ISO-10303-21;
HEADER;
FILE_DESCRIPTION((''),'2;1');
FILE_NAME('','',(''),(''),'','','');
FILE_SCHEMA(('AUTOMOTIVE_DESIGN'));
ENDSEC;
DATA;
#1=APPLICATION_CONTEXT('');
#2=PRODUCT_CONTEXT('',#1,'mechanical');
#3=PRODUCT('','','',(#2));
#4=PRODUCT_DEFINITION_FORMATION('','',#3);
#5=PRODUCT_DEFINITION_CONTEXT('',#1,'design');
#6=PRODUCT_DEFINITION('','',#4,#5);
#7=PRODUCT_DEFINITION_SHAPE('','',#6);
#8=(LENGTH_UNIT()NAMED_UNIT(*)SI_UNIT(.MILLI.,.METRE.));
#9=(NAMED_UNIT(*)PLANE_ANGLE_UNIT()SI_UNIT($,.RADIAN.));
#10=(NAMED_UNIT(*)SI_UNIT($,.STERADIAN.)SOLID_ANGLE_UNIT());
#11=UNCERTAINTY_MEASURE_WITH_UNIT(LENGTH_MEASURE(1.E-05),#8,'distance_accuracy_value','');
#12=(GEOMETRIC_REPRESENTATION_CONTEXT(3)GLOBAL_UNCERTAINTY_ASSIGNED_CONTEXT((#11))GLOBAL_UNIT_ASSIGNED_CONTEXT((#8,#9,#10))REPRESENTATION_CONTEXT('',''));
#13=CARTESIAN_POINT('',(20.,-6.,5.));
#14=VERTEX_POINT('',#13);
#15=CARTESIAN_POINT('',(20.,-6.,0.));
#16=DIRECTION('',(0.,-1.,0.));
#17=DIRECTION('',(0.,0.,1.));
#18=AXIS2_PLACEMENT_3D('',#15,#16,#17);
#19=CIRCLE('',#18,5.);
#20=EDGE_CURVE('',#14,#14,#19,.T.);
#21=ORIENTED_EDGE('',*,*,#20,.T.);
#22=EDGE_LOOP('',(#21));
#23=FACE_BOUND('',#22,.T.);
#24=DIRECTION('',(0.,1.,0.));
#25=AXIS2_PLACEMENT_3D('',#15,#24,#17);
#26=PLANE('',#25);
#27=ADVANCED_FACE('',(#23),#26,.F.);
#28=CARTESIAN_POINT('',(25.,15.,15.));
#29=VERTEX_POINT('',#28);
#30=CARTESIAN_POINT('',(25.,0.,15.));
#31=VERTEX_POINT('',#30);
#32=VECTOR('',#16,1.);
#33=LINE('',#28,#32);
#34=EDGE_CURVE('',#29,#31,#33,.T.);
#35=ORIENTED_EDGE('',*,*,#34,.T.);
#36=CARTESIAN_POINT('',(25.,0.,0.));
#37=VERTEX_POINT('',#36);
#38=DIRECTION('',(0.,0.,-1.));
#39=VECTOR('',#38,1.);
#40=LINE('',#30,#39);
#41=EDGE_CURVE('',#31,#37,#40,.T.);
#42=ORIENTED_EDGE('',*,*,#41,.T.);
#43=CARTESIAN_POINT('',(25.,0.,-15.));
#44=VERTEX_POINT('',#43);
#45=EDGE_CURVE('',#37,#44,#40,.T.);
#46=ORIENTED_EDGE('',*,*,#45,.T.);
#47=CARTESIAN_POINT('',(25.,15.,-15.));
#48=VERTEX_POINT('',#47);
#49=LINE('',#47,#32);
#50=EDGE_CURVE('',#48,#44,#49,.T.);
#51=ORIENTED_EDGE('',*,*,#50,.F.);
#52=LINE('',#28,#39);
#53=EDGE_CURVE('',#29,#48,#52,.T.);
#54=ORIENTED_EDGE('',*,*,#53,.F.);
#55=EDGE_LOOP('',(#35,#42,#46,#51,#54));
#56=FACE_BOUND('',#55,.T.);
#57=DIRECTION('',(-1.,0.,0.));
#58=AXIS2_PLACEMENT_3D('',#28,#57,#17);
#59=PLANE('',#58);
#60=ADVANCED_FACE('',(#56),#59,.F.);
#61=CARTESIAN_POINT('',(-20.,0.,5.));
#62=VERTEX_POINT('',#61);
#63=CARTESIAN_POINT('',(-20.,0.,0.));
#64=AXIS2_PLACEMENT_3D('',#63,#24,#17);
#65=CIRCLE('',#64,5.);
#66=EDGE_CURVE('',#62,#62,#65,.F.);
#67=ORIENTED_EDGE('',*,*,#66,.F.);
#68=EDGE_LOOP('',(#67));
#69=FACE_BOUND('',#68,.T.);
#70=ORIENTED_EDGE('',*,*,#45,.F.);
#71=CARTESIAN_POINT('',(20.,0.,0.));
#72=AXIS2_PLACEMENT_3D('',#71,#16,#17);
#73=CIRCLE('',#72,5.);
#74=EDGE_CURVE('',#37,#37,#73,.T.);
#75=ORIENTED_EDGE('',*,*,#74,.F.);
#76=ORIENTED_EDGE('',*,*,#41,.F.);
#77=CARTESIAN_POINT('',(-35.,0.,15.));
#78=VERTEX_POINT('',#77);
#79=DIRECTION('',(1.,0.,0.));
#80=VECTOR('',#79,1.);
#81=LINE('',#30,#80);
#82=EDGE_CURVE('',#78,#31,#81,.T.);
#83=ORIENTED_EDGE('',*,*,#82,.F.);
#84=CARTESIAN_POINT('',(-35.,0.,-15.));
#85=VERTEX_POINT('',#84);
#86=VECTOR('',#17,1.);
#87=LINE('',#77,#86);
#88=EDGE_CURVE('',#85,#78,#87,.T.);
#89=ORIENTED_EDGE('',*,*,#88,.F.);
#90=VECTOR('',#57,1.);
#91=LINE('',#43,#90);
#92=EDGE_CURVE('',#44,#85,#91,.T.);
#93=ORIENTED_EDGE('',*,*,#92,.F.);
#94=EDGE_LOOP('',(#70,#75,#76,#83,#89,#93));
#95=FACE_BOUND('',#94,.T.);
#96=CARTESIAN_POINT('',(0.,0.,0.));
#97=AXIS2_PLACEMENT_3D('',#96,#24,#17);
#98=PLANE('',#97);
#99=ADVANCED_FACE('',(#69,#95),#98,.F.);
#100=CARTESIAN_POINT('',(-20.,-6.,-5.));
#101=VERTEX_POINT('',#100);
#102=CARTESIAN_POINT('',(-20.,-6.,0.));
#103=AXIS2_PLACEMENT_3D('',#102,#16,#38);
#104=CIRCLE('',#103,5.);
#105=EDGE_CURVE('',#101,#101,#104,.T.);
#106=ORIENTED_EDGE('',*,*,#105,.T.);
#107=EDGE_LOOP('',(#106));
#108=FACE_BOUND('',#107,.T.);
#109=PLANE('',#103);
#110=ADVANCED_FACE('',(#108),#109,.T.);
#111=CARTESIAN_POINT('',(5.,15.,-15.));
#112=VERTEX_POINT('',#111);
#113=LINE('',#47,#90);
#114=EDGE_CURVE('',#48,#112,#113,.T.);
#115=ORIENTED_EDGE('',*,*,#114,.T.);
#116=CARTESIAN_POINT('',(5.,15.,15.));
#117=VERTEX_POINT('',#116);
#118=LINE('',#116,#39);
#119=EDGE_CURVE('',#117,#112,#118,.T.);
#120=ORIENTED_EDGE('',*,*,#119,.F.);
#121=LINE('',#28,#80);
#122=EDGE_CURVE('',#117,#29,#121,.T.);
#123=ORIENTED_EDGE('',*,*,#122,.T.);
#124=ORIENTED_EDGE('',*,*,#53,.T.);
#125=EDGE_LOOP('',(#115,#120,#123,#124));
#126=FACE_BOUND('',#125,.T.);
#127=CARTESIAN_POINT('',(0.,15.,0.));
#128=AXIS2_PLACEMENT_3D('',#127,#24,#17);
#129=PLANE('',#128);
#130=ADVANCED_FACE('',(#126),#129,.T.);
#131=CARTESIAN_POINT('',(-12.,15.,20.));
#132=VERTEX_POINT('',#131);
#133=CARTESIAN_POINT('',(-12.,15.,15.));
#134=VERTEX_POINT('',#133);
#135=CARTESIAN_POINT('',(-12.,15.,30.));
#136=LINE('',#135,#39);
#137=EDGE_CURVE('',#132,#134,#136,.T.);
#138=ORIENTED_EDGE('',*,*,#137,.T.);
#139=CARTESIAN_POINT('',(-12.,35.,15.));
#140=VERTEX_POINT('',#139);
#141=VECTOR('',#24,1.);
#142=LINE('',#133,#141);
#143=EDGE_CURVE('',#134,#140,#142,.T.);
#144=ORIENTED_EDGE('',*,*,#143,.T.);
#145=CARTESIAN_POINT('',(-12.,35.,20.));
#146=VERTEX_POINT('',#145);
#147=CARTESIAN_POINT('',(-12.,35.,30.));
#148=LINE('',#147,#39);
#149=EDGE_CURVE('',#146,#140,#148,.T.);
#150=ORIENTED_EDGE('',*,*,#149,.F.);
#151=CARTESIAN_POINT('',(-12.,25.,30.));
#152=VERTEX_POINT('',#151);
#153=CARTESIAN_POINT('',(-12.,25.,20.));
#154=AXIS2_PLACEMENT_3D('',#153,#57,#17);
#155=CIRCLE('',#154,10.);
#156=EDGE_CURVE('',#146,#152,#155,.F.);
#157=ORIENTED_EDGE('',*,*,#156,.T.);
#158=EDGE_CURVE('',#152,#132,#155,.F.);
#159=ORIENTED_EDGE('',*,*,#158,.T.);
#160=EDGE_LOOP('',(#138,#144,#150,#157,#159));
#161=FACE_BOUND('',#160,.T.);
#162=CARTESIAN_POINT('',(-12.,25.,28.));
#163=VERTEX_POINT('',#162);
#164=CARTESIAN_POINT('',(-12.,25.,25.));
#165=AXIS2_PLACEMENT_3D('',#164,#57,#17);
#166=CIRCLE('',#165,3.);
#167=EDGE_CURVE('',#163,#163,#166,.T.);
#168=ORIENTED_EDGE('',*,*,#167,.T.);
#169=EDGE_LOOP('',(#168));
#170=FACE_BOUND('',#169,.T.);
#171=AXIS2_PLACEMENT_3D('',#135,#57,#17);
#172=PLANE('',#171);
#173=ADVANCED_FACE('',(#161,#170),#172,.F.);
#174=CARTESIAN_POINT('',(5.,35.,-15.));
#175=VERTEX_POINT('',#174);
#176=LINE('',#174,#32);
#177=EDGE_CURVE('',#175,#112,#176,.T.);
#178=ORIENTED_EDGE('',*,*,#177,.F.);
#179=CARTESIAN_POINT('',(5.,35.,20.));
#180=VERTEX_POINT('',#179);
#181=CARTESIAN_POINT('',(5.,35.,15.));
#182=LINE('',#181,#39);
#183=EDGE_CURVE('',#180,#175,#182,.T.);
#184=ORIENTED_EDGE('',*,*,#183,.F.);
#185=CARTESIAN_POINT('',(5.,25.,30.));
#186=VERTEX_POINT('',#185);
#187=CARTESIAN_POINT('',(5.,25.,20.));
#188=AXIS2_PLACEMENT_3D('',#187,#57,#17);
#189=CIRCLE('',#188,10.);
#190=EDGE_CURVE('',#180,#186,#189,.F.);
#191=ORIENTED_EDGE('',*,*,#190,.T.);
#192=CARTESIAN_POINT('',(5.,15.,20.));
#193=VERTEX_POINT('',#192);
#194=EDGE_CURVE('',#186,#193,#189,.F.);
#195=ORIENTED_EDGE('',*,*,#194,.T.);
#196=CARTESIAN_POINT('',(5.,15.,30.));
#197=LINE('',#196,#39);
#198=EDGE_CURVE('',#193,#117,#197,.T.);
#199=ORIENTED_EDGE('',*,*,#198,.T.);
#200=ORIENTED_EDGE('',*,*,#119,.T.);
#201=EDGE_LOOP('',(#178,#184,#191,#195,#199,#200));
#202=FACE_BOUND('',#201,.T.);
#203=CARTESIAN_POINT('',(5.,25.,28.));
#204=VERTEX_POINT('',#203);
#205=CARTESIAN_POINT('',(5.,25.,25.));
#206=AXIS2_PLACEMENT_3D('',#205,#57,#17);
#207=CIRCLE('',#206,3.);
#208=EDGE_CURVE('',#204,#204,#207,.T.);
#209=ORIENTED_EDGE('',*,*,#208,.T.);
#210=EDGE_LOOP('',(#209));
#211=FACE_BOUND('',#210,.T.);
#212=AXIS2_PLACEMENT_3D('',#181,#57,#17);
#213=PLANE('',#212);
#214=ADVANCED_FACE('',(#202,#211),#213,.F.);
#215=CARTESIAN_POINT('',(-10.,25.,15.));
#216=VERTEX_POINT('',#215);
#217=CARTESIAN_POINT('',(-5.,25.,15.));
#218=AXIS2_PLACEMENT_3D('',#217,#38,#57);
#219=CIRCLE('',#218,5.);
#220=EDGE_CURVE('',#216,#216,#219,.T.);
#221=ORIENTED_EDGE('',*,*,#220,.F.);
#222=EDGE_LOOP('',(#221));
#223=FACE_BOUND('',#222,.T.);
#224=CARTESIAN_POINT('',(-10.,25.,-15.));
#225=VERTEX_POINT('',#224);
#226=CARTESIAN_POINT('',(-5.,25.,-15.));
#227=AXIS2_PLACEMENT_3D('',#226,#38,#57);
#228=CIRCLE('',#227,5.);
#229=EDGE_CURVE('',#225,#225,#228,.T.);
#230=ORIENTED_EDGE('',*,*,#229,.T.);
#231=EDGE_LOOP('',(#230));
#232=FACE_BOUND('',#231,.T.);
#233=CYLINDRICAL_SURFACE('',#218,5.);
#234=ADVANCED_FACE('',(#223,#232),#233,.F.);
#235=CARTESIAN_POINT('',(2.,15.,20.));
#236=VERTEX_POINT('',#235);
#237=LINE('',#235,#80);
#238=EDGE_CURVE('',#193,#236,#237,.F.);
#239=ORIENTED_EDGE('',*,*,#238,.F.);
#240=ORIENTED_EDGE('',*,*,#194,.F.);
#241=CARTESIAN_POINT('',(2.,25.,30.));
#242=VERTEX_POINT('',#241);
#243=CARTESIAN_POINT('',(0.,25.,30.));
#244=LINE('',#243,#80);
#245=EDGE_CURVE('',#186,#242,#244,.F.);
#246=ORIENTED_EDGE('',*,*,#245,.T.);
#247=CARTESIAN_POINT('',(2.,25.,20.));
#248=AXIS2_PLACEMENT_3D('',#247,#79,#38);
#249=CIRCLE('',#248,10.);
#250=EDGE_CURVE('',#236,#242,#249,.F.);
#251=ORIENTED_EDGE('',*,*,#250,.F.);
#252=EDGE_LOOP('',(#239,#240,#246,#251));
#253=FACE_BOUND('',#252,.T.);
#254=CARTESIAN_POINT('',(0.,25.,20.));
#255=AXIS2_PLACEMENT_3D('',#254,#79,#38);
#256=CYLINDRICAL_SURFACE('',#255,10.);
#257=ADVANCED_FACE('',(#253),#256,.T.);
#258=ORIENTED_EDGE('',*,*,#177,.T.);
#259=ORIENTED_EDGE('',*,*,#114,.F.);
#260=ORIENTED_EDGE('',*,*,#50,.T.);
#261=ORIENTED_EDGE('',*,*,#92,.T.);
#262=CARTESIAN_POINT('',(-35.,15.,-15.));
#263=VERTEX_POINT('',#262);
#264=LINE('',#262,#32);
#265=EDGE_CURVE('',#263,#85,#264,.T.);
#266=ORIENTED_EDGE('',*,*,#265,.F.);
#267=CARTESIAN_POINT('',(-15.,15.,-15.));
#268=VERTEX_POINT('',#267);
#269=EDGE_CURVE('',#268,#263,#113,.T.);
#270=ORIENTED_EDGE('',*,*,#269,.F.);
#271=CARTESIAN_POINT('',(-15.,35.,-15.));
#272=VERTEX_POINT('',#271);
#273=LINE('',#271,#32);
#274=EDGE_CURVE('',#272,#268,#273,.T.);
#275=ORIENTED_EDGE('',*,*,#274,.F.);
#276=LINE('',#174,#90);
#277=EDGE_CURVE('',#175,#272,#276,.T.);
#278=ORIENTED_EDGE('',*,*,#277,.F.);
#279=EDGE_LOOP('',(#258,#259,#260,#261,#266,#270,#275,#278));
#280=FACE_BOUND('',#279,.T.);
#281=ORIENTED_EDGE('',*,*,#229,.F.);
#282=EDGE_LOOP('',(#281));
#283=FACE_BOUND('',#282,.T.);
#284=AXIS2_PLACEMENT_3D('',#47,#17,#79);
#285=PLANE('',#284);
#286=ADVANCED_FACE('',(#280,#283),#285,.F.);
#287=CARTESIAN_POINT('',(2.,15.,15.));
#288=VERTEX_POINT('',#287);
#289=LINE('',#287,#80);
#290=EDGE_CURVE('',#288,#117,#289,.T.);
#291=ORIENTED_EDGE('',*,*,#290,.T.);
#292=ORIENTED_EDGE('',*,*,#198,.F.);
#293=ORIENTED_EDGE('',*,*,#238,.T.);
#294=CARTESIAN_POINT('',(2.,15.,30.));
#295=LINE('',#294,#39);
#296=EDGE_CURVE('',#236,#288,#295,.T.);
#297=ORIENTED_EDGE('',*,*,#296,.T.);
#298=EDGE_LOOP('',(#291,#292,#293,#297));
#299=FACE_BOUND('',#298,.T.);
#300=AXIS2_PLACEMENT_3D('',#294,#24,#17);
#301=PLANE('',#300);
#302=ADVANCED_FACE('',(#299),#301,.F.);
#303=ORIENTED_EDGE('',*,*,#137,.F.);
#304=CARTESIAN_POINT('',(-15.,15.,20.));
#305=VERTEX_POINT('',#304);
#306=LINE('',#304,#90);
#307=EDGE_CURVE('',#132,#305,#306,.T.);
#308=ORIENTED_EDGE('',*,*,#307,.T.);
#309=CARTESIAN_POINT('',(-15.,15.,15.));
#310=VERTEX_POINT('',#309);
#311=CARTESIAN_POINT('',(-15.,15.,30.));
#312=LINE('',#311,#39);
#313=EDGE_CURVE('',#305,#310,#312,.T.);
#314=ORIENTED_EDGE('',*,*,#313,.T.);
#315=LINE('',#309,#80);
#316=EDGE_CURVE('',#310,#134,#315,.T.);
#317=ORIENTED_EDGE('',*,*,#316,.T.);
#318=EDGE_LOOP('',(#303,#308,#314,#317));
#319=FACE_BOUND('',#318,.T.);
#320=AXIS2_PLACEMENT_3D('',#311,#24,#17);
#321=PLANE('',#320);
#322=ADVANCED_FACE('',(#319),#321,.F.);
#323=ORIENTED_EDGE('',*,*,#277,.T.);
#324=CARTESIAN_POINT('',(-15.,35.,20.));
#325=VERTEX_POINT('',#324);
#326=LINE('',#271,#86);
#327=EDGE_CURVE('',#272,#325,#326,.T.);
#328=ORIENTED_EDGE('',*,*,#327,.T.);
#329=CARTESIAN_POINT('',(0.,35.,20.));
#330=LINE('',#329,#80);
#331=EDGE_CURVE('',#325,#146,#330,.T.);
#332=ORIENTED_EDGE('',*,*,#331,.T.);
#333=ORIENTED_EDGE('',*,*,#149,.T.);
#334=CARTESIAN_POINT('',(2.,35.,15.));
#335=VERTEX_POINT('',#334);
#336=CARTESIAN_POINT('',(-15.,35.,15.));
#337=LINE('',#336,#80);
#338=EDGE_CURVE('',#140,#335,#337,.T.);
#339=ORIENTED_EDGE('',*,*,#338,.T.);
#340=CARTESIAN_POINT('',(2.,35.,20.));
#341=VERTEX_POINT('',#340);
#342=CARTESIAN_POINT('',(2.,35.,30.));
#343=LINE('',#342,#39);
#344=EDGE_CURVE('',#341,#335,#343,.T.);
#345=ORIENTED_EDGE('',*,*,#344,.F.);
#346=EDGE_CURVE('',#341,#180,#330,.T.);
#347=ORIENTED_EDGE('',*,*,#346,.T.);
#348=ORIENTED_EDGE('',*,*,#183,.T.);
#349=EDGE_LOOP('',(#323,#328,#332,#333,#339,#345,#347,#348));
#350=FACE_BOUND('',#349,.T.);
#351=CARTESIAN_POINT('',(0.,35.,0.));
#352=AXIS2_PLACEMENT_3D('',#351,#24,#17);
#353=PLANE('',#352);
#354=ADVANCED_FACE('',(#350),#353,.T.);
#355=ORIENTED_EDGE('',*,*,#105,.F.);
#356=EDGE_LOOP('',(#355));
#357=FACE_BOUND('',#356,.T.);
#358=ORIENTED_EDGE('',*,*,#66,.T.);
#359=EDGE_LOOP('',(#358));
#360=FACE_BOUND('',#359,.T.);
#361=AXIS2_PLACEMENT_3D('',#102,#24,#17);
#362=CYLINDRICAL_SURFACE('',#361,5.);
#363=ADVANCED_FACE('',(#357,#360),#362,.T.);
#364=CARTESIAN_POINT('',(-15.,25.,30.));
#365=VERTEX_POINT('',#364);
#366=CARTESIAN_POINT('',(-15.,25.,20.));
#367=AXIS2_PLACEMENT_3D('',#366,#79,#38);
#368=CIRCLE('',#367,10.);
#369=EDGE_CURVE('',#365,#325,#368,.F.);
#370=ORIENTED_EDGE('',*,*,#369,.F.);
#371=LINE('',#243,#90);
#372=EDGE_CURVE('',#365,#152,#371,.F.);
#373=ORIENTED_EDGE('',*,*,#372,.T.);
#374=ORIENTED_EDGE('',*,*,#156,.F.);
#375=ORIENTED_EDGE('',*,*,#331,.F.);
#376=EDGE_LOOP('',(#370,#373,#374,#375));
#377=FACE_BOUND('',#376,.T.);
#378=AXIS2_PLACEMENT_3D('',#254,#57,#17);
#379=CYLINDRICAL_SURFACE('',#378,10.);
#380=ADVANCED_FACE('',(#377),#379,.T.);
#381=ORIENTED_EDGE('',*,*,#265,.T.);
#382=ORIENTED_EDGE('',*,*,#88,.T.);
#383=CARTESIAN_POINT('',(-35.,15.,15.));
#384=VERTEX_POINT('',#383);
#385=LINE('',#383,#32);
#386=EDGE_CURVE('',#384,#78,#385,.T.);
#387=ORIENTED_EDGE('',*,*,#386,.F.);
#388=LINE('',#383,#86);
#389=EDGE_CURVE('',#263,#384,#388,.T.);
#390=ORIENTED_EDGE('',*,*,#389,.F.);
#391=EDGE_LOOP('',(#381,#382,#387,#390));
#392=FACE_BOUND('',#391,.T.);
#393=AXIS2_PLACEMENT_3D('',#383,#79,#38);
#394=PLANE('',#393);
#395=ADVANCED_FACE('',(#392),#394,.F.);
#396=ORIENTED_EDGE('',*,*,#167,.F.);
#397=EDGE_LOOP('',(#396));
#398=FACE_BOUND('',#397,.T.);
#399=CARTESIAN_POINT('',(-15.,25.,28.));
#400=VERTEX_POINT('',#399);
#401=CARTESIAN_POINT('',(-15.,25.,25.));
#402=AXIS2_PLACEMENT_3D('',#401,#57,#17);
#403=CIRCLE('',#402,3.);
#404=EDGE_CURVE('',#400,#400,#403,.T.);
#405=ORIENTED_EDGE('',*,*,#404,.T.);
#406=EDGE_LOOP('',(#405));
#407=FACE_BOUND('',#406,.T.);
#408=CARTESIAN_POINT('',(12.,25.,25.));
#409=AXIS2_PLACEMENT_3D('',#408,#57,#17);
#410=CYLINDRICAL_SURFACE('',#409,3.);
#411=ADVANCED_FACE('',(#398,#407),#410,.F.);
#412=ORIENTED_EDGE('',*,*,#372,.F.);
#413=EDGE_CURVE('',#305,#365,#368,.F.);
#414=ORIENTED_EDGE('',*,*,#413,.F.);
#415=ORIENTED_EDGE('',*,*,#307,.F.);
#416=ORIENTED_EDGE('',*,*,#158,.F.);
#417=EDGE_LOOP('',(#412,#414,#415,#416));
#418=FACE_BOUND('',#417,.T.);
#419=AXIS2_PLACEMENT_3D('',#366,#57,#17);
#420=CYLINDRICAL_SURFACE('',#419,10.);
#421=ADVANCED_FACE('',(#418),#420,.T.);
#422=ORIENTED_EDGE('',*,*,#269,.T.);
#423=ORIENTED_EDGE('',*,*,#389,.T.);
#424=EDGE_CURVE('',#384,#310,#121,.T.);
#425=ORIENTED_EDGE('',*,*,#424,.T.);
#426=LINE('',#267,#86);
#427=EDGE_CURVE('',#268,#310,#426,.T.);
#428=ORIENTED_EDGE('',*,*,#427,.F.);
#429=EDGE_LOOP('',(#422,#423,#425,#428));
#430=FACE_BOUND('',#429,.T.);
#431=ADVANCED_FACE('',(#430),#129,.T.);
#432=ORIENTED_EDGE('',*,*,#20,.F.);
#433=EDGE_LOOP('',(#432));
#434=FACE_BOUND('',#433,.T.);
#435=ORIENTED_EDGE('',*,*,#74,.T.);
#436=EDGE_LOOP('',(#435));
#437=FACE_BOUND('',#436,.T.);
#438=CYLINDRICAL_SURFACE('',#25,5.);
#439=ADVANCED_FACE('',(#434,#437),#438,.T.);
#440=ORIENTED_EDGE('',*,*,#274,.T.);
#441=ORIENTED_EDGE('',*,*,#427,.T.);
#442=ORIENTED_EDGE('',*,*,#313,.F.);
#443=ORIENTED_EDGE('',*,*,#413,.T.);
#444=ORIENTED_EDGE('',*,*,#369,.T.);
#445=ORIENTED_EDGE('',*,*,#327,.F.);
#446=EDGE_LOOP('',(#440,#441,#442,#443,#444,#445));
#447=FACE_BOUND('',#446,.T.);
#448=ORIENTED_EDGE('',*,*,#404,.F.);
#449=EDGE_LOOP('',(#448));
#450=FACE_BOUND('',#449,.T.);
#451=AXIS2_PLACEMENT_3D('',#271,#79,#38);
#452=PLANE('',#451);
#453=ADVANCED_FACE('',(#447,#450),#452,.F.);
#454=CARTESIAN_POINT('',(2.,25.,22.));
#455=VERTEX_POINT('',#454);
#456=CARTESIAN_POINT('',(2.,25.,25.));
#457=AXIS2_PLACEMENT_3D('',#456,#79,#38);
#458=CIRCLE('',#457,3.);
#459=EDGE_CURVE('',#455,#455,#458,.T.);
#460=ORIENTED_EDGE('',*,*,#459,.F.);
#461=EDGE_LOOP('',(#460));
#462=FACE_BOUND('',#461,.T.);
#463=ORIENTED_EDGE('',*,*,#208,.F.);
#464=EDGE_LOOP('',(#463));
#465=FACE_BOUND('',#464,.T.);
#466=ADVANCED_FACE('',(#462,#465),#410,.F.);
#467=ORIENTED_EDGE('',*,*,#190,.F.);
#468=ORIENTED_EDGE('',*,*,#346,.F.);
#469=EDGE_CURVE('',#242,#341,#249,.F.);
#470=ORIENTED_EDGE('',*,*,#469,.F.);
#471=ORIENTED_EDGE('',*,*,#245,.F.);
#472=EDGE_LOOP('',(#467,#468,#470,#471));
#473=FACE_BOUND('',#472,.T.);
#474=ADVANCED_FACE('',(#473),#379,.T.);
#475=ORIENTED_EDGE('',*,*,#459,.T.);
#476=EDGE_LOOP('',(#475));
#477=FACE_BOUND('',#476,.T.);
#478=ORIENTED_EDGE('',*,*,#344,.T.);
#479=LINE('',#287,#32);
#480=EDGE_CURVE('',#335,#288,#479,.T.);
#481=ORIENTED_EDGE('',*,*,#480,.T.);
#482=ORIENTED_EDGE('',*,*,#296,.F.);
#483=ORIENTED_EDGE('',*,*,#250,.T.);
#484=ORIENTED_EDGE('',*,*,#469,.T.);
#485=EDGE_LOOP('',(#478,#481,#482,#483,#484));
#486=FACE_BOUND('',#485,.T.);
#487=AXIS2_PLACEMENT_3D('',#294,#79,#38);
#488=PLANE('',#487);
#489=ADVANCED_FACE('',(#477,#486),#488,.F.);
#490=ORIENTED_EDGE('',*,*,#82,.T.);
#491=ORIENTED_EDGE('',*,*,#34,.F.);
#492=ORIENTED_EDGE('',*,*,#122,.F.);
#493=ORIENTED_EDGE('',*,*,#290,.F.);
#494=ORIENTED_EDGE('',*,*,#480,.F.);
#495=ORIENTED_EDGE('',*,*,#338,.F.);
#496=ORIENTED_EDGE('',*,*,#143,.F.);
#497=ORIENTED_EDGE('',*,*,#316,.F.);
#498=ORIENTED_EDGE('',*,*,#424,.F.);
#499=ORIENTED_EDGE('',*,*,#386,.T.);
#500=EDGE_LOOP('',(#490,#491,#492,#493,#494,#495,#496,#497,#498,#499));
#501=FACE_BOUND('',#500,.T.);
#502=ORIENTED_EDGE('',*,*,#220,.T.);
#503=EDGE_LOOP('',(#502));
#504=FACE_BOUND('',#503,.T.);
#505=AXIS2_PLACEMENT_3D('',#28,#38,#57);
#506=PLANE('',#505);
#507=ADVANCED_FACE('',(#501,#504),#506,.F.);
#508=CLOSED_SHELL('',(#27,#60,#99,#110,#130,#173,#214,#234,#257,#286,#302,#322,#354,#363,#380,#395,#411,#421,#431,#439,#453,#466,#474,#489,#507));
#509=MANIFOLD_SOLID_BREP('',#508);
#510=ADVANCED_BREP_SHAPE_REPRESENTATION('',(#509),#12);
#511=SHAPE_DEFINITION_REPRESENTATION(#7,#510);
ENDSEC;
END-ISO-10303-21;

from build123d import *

# Parameters (mm, degrees)
ESQUISSE2_W             = 60
ESQUISSE2_H             = 30
BOSS_EXTRU_1_DEPTH      = 15
ESQUISSE3_R             = 5
BOSS_EXTRU_2_DEPTH      = 6
BOSS_EXTRU_3_DEPTH      = 20
ESQUISSE5_R             = 5
ENL_V_MAT_EXTRU_1_DEPTH = 30
ESQUISSE6_W             = 3
ESQUISSE6_H             = 20
BOSS_EXTRU_4_DEPTH      = 15
CONG_2_R                = 10
CONG_3_R                = 10
CONG_4_R                = 10
CONG_5_R                = 10
ESQUISSE7_R             = 3
ENL_V_MAT_EXTRU_2_DEPTH = 27


with BuildPart() as part:
    # Esquisse2 → Boss.-Extru.1 (new body)
    with BuildSketch(Plane(origin=(0, 0, 0), x_dir=(1, 0, 0), z_dir=(0, 1, 0))):
        with Locations((-5, 0)):
            Rectangle(ESQUISSE2_W, ESQUISSE2_H)
    extrude(amount=BOSS_EXTRU_1_DEPTH)

    # Esquisse3 → Boss.-Extru.2 (add)
    with BuildSketch(Plane.XZ):
        with Locations(Location((-20, 0, 0), (0, 0, 90))):
            Circle(ESQUISSE3_R)
        with Locations(Location((20, 0, 0), (0, 0, 90))):
            Circle(ESQUISSE3_R)
    extrude(amount=BOSS_EXTRU_2_DEPTH)

    # Esquisse4 → Boss.-Extru.3 (add)
    with BuildSketch(Plane(origin=(0, 15, 0), x_dir=(1, 0, 0), z_dir=(0, 1, 0))):
        Polygon((-5, 15), (-15, 15), (-15, -15), (5, -15), (5, 15), align=None)
    extrude(amount=BOSS_EXTRU_3_DEPTH)

    # Esquisse5 → Enlèv. mat.-Extru.1 (cut)
    with BuildSketch(Plane(origin=(0, 0, -15), x_dir=(-1, 0, 0), z_dir=(0, 0, -1))):
        with Locations((5, 25)):
            Circle(ESQUISSE5_R)
    extrude(amount=-ENL_V_MAT_EXTRU_1_DEPTH, mode=Mode.SUBTRACT)

    # Esquisse6 → Boss.-Extru.4 (add)
    with BuildSketch(Plane.XY.offset(15)):
        with Locations((-13.5, 25)):
            Rectangle(ESQUISSE6_W, ESQUISSE6_H)
        with Locations((3.5, 25)):
            Rectangle(ESQUISSE6_W, ESQUISSE6_H)
    extrude(amount=BOSS_EXTRU_4_DEPTH)

    # Congé2
    cong_2_edges = [part.edges().sort_by_distance(p)[0] for p in [
        (3.5, 35, 30),
    ]]
    fillet(cong_2_edges, radius=CONG_2_R)

    # Congé3
    cong_3_edges = [part.edges().sort_by_distance(p)[0] for p in [
        (3.5, 15, 30),
    ]]
    fillet(cong_3_edges, radius=CONG_3_R - 0.0001)  # a hair under: the kernel refuses the full size

    # Congé4
    cong_4_edges = [part.edges().sort_by_distance(p)[0] for p in [
        (-13.5, 15, 30),
    ]]
    fillet(cong_4_edges, radius=CONG_4_R)

    # Congé5
    cong_5_edges = [part.edges().sort_by_distance(p)[0] for p in [
        (-13.5, 35, 30),
    ]]
    fillet(cong_5_edges, radius=CONG_5_R - 0.0001)  # a hair under: the kernel refuses the full size

    # Esquisse7 → Enlèv. mat.-Extru.2 (cut)
    with BuildSketch(Plane.ZY.offset(15)):
        with Locations((25, 25)):
            Circle(ESQUISSE7_R)
    extrude(amount=-ENL_V_MAT_EXTRU_2_DEPTH, mode=Mode.SUBTRACT)


solid = part.part
